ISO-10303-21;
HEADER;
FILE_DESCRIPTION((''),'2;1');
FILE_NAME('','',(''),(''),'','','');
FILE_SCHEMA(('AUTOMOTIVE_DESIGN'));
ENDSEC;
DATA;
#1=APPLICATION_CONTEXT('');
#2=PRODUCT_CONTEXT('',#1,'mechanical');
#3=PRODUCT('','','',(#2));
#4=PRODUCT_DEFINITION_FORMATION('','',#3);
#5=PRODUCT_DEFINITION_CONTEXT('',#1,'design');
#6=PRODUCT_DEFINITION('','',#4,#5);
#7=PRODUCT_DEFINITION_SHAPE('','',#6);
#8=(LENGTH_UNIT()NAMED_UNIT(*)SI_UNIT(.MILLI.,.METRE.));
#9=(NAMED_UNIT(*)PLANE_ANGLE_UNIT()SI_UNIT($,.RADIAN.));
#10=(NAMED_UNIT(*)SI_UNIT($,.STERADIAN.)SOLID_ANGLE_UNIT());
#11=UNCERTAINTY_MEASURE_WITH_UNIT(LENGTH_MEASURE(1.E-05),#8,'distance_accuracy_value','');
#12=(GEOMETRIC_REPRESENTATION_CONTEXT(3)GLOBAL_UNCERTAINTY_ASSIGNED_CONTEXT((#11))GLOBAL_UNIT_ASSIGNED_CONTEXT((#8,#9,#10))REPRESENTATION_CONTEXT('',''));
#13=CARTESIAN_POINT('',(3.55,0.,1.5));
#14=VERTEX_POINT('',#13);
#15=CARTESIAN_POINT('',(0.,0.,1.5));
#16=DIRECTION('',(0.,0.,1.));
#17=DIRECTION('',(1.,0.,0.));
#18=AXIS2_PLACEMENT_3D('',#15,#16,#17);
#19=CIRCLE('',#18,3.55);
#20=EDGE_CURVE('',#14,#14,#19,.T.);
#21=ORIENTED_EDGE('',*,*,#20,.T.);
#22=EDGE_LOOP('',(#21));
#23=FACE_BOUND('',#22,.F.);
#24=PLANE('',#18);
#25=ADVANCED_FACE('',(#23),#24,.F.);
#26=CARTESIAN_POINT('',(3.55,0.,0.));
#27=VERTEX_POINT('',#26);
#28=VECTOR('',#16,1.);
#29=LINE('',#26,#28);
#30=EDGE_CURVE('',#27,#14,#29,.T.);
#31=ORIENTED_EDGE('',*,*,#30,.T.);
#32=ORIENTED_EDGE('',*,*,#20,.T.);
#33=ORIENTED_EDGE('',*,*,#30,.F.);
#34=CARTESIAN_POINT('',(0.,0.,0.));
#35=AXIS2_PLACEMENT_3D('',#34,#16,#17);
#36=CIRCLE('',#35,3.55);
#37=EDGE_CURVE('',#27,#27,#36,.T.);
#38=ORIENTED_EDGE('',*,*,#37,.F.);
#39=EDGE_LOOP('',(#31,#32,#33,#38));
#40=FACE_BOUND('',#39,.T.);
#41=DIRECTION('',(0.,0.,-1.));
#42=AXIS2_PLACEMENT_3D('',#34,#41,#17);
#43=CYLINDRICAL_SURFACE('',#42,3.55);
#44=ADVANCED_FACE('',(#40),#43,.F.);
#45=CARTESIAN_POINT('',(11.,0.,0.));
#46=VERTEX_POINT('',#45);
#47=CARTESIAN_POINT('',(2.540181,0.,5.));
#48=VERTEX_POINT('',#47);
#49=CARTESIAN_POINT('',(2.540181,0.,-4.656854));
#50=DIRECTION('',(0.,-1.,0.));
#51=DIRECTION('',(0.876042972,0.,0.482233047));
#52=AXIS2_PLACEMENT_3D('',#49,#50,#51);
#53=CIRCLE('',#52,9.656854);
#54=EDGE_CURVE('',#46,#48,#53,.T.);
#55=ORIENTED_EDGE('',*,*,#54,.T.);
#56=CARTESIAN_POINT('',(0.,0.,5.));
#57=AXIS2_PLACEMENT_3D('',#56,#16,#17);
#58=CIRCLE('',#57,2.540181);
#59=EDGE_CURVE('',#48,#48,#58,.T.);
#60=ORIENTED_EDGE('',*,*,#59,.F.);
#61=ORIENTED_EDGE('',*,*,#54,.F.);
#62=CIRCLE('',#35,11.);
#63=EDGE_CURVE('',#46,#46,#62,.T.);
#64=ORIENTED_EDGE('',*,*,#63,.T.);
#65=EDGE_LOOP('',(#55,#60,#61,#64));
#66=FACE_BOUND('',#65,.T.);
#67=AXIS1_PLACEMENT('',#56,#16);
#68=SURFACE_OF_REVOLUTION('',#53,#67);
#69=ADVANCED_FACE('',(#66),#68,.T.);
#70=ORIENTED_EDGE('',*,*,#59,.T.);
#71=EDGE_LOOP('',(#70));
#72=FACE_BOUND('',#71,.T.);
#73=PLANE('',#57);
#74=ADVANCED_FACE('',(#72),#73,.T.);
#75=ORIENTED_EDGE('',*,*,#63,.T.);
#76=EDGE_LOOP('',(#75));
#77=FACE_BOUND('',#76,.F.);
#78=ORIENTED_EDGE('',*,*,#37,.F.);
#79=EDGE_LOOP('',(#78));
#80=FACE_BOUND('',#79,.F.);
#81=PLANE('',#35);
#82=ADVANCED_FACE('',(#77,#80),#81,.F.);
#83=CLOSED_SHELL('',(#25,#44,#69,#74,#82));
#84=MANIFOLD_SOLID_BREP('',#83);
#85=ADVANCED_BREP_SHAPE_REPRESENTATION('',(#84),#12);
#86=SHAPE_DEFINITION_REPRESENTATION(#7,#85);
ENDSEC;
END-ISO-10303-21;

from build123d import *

# Parameters (mm, degrees)
F0_R     = 11
F1_DEPTH = 5
F3_R     = 3.55
F4_DEPTH = 1.5


# Not quite as in the source:
# - a fillet or chamfer that OpenCascade refuses, or shapes differently, is made with other operations: its cross-section is extruded or revolved along the edge and cut away or added


with BuildPart() as f1:
    # F0 (on Top) → F1 (new body)
    with BuildSketch(Plane.XY):
        Circle(F0_R)
    extrude(amount=F1_DEPTH)

    # F2: fillet of radius 9.6568542495 on 1 edges, made by hand

    # F2_s1 → F2_t2 (revolve, cut)
    with BuildSketch(Plane.XZ):
        with BuildLine():
            ThreePointArc((11, 0), (7.4536454326, 3.6565504906), (2.5401807055, 5))
            Line((2.5401807055, 5), (11, 5))
            Line((11, 5), (11, 0))
        make_face()
    revolve(axis=Axis((0, 0, 5), (0, 0, 1)), mode=Mode.SUBTRACT)

    # F3 (on Top) → F4 (cut)
    with BuildSketch(Plane.XY):
        Circle(F3_R)
    extrude(amount=F4_DEPTH, mode=Mode.SUBTRACT)


solid = f1.part
